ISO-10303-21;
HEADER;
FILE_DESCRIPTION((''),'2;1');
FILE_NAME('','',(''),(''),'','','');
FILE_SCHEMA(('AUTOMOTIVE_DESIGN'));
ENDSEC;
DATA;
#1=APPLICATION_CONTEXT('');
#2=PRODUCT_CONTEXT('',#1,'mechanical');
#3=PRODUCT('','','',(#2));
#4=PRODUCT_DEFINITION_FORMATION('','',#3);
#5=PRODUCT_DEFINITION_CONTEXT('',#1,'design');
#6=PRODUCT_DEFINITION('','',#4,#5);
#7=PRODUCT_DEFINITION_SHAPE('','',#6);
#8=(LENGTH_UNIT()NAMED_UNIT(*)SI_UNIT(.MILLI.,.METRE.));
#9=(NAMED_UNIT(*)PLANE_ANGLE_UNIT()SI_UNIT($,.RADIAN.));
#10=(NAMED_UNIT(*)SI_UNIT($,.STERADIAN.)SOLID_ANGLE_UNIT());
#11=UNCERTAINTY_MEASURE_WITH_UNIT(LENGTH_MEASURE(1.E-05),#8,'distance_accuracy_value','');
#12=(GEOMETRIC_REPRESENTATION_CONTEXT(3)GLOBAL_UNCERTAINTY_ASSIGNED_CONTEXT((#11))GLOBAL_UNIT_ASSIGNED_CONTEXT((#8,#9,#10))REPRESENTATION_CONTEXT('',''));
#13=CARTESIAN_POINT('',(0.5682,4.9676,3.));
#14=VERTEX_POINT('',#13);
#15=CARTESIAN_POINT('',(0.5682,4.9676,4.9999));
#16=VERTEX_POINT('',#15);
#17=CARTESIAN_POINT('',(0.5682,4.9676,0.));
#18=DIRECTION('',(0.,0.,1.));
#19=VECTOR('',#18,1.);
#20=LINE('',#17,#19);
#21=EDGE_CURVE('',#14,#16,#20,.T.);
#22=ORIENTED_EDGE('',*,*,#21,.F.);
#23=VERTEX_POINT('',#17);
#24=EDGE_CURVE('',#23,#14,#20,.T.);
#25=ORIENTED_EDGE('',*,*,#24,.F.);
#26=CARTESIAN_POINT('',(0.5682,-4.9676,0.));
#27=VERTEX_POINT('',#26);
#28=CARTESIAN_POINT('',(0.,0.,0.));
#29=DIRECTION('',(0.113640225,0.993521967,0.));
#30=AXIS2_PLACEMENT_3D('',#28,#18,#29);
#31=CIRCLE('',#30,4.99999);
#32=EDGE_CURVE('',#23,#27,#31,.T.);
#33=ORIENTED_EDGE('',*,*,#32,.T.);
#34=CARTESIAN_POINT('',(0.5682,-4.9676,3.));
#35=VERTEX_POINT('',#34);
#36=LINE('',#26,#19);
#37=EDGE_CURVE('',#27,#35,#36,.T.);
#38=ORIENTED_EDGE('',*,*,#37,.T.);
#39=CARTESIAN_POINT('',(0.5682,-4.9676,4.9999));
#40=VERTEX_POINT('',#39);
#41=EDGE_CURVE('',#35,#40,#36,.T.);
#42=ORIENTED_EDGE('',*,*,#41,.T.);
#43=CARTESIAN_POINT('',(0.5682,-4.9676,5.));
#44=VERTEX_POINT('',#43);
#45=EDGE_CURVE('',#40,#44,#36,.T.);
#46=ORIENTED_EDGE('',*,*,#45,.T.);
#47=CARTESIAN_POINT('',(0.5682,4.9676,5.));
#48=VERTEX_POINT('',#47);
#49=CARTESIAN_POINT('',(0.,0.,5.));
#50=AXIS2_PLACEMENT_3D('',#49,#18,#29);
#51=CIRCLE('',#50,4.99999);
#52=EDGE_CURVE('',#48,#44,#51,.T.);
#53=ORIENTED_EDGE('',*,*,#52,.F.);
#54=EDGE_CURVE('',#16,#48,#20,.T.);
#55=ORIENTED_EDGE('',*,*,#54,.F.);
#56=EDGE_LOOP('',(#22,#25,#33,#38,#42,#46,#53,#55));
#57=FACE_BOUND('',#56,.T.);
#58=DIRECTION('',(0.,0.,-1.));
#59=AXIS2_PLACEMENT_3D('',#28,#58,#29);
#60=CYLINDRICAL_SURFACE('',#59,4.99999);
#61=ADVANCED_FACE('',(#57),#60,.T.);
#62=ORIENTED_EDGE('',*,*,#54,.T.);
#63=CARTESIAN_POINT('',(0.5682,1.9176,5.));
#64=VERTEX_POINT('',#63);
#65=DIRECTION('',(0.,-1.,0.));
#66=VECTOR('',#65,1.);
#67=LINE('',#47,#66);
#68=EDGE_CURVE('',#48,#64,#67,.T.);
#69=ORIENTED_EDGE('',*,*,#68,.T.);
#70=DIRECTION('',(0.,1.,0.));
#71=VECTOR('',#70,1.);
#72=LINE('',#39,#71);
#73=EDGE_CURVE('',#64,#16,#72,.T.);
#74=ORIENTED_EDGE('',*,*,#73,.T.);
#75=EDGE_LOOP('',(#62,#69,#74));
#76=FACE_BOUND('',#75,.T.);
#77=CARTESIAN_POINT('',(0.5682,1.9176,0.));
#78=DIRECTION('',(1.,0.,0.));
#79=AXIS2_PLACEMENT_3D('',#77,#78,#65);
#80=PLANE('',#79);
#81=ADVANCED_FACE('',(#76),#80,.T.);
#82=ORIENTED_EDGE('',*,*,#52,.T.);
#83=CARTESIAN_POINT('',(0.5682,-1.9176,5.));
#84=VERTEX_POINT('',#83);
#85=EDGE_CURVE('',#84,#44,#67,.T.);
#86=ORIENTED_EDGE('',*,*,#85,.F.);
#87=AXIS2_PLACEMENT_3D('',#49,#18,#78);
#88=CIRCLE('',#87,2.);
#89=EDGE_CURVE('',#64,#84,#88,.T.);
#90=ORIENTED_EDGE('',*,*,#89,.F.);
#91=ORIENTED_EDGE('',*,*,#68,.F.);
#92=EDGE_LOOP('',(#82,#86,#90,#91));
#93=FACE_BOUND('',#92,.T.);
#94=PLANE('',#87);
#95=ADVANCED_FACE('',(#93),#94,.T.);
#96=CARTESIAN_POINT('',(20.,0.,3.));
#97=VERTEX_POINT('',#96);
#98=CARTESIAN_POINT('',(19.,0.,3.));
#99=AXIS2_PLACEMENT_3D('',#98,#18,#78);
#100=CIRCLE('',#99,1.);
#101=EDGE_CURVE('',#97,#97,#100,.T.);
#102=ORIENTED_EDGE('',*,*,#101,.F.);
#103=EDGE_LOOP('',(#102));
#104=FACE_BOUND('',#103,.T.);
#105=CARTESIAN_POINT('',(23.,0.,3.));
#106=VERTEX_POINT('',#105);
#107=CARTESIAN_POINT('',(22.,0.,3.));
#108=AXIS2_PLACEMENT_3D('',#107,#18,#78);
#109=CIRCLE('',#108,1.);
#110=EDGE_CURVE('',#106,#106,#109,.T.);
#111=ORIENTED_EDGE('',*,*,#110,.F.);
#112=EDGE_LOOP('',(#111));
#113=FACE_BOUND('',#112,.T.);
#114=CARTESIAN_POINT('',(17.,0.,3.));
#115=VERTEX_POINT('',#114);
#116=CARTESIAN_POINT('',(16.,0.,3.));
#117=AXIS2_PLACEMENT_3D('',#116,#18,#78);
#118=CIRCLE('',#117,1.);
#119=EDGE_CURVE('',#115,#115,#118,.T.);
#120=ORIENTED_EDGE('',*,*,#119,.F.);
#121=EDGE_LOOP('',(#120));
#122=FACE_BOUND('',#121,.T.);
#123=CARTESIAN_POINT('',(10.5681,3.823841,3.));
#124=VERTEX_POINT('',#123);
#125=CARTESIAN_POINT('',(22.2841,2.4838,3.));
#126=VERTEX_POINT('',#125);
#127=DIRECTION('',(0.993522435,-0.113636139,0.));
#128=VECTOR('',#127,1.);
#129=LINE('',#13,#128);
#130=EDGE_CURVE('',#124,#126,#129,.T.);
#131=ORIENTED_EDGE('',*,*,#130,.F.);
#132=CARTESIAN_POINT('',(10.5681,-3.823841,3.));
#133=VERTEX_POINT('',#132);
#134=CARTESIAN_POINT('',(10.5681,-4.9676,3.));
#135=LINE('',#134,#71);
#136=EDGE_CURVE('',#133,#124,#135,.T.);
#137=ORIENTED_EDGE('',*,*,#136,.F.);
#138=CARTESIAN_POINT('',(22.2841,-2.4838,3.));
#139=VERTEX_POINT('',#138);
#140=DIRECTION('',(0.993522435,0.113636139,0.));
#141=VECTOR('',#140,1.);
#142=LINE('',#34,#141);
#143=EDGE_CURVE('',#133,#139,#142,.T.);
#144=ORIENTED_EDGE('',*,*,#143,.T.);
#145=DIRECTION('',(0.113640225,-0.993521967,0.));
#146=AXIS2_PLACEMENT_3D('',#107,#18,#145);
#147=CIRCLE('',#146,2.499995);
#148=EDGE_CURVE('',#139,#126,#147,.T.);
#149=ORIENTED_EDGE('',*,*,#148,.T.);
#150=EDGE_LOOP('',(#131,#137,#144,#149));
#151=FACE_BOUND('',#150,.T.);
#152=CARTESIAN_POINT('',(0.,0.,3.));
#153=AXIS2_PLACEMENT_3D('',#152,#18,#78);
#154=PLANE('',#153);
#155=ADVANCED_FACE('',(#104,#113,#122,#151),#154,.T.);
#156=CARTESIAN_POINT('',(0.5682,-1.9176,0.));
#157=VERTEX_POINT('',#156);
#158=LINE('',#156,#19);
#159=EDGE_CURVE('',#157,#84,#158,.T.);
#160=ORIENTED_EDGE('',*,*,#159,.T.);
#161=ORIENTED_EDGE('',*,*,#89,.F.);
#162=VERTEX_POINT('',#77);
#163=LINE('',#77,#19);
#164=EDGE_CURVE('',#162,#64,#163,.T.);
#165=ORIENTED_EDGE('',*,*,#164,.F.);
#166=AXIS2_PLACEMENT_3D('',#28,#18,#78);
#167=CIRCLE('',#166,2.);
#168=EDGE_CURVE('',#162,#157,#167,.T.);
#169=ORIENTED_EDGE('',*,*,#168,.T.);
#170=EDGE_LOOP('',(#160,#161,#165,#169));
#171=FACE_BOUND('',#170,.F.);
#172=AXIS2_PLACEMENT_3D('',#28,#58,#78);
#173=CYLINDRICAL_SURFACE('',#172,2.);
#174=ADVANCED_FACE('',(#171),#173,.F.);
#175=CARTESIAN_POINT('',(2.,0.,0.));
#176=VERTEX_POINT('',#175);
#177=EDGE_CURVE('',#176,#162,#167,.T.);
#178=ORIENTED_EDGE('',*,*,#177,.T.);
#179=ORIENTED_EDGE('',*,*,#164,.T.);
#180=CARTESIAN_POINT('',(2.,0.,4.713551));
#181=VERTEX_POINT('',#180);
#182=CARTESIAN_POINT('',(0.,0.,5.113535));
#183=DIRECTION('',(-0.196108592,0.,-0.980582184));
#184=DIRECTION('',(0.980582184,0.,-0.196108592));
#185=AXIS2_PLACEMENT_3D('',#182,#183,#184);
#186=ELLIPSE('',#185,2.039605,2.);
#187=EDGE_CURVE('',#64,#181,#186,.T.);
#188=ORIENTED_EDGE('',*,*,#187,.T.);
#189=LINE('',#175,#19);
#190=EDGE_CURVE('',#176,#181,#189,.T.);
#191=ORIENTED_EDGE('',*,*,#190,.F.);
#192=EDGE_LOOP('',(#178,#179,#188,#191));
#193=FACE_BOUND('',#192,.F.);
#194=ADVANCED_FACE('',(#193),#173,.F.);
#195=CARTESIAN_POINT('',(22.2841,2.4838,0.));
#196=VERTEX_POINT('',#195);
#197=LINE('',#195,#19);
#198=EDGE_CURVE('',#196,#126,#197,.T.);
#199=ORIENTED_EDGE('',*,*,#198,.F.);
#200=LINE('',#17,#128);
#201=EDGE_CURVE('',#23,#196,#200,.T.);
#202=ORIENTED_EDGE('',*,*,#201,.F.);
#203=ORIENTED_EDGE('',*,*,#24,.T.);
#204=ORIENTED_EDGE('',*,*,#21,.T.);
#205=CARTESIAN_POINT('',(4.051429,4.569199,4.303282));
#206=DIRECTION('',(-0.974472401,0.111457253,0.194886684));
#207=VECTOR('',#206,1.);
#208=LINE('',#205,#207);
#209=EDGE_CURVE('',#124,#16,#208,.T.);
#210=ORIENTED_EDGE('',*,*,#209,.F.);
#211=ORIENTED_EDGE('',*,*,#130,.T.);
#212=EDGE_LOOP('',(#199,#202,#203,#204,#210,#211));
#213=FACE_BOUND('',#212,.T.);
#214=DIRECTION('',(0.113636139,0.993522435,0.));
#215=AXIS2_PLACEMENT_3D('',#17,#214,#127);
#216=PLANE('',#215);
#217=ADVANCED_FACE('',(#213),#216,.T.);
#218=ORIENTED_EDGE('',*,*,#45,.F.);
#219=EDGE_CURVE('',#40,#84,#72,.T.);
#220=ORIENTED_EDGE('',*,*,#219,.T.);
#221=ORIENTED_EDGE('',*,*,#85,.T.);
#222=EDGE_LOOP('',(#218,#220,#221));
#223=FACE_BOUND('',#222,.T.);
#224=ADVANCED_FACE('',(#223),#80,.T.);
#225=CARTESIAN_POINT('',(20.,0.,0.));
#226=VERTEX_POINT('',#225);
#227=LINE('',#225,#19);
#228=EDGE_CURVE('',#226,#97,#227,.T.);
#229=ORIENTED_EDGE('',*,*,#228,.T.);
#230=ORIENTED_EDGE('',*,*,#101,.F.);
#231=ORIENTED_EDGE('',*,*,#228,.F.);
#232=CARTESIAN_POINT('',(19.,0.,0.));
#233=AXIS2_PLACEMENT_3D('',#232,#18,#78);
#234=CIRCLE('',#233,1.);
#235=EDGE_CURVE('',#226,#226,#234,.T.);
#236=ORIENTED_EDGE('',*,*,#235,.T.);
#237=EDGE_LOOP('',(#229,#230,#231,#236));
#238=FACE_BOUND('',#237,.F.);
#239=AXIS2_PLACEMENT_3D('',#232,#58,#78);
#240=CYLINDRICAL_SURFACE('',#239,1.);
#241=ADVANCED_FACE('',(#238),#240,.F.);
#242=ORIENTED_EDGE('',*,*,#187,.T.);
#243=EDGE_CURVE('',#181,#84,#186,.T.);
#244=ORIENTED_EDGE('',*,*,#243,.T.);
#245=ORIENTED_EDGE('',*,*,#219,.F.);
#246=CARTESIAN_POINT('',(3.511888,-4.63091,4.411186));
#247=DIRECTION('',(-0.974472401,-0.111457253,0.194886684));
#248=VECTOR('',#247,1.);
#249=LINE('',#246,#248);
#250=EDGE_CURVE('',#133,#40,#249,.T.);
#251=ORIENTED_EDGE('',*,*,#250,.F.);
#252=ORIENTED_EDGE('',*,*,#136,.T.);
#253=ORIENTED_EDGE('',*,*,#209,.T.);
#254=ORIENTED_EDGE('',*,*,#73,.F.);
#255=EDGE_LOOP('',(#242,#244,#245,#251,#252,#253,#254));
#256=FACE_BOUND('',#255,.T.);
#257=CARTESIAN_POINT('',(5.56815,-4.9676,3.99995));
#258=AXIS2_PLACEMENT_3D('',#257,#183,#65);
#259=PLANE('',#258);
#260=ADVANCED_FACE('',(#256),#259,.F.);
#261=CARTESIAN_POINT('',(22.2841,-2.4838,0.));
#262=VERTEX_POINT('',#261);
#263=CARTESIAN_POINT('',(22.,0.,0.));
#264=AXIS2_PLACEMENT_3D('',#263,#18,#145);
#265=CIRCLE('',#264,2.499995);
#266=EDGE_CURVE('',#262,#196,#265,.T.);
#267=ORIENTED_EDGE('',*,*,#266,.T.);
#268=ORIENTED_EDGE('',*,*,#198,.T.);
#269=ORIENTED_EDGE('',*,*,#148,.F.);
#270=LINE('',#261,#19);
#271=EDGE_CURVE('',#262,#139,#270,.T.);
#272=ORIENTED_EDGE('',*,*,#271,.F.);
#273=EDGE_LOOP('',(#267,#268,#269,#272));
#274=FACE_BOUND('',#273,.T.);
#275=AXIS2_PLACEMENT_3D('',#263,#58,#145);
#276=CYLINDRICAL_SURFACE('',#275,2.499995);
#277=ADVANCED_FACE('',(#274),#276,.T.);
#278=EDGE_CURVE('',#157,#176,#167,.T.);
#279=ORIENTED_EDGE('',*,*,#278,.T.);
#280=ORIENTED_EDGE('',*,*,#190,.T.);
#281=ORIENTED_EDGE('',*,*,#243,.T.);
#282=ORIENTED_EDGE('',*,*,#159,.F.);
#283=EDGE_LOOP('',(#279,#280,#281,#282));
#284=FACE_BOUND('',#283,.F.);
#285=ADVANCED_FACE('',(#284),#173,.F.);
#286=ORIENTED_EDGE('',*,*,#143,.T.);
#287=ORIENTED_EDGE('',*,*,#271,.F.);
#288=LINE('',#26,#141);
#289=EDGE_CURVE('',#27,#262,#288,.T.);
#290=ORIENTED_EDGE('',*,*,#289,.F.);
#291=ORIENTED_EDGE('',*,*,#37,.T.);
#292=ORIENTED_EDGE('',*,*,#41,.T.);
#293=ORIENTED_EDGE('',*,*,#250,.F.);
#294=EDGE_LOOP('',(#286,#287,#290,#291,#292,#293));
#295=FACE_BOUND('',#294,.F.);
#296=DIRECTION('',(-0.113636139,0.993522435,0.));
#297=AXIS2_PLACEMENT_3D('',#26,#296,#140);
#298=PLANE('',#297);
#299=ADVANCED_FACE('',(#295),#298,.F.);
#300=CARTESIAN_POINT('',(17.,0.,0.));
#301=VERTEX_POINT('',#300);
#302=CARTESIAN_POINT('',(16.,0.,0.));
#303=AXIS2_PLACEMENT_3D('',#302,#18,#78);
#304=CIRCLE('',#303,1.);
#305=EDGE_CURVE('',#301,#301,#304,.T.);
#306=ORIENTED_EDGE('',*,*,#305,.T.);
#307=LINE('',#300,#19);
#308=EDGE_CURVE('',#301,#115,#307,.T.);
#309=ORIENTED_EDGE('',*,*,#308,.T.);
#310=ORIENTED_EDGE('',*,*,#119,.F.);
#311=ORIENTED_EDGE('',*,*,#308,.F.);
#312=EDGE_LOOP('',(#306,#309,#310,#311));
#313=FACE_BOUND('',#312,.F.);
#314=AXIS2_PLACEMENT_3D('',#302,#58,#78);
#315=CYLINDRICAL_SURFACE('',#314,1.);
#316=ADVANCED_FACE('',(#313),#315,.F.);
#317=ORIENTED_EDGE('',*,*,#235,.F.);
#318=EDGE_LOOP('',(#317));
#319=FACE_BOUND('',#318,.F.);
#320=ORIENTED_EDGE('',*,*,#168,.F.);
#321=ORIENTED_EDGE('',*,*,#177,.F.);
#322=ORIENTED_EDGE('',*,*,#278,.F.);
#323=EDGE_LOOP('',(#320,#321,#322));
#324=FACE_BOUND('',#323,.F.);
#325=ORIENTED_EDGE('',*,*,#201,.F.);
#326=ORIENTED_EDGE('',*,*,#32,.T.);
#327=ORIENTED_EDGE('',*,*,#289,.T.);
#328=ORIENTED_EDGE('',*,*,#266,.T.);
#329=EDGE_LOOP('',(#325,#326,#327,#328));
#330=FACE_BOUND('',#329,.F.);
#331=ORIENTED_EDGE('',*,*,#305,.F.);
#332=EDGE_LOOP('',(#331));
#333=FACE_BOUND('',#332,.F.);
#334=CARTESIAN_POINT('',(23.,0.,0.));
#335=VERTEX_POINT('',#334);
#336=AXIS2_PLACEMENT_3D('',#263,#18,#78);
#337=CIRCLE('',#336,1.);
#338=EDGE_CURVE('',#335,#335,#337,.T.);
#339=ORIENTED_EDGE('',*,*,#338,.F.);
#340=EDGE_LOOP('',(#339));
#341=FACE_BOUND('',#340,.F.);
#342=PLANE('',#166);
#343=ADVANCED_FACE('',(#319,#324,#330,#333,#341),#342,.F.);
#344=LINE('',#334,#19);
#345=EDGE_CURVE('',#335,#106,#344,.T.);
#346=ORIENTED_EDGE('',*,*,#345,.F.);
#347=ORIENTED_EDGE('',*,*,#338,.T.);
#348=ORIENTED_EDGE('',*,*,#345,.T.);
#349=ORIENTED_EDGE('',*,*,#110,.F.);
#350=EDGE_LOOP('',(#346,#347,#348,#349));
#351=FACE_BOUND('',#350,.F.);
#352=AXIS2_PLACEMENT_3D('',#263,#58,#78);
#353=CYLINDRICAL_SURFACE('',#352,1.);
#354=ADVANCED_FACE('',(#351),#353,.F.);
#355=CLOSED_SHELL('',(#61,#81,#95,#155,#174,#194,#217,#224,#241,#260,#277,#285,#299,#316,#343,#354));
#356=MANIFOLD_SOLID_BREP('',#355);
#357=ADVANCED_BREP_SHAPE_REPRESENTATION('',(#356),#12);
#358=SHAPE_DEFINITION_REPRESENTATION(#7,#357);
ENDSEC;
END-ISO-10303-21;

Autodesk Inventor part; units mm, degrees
ref_plane "YZ Plane" through (0, 0, 0) normal (1, 0, 0) x (0, 1, 0)
ref_plane "XZ Plane" through (0, 0, 0) normal (0, 1, 0) x (-1, 0, 0)
ref_plane "XY Plane" through (0, 0, 0) normal (0, 0, 1) x (1, 0, 0)
sketch "Skizze1" plane through (0, 0, 0) normal (0, 0, 1) x (1, 0, 0)
  line L0 (0, 7) -> (0, -7) construction
  line L1 (-10.9, 0) -> (30.4, 0) construction
  circle A0 centre (0, 0) radius 2
  circle A1 centre (16, 0) radius 1
  circle A2 centre (19, 0) radius 1
  circle A3 centre (22, 0) radius 1
  arc A4 (22.2841, -2.4838) -> (22.2841, 2.4838) centre (22, 0) ccw
  arc A5 (0.5682, 4.9676) -> (0.5682, -4.9676) centre (0, 0) ccw
  line L2 (0.5682, 4.9676) -> (22.2841, 2.4838)
  line L3 (0.5682, -4.9676) -> (22.2841, -2.4838)
  line L4 (0.5682, -4.9676) -> (0.5682, -1.9176)
  line L5 (0.5682, 1.9176) -> (0.5682, 4.9676)
  line L6 (0.5682, 1.9176) -> (0.5682, -1.9176)
  dimension "d1" = 19
  dimension "d2" = 22
  dimension "d3" = 5
  dimension "d4" = 2
  dimension "d5" = 4
  dimension "d6" = 10
  dimension "d16" = 16
extrude "Extrusion1" add sketch "Skizze1" along normal blind 3
extrude "Extrusion2" add sketch "Skizze1" along normal blind 5 contours L6 A0 | A0 L4 A5 L5 picked at (-0.8876, -0.1748)
chamfer "Fase1" distance 10 distance2 2 1 edges at (0.5682, 0, 3) measured on face at (5.3788, 0, 3)
extrude "Extrusion3" cut sketch "Skizze1" along normal blind 5 contours A0 L6 | L6 A0
properties part number "ServoArm 22mm"
